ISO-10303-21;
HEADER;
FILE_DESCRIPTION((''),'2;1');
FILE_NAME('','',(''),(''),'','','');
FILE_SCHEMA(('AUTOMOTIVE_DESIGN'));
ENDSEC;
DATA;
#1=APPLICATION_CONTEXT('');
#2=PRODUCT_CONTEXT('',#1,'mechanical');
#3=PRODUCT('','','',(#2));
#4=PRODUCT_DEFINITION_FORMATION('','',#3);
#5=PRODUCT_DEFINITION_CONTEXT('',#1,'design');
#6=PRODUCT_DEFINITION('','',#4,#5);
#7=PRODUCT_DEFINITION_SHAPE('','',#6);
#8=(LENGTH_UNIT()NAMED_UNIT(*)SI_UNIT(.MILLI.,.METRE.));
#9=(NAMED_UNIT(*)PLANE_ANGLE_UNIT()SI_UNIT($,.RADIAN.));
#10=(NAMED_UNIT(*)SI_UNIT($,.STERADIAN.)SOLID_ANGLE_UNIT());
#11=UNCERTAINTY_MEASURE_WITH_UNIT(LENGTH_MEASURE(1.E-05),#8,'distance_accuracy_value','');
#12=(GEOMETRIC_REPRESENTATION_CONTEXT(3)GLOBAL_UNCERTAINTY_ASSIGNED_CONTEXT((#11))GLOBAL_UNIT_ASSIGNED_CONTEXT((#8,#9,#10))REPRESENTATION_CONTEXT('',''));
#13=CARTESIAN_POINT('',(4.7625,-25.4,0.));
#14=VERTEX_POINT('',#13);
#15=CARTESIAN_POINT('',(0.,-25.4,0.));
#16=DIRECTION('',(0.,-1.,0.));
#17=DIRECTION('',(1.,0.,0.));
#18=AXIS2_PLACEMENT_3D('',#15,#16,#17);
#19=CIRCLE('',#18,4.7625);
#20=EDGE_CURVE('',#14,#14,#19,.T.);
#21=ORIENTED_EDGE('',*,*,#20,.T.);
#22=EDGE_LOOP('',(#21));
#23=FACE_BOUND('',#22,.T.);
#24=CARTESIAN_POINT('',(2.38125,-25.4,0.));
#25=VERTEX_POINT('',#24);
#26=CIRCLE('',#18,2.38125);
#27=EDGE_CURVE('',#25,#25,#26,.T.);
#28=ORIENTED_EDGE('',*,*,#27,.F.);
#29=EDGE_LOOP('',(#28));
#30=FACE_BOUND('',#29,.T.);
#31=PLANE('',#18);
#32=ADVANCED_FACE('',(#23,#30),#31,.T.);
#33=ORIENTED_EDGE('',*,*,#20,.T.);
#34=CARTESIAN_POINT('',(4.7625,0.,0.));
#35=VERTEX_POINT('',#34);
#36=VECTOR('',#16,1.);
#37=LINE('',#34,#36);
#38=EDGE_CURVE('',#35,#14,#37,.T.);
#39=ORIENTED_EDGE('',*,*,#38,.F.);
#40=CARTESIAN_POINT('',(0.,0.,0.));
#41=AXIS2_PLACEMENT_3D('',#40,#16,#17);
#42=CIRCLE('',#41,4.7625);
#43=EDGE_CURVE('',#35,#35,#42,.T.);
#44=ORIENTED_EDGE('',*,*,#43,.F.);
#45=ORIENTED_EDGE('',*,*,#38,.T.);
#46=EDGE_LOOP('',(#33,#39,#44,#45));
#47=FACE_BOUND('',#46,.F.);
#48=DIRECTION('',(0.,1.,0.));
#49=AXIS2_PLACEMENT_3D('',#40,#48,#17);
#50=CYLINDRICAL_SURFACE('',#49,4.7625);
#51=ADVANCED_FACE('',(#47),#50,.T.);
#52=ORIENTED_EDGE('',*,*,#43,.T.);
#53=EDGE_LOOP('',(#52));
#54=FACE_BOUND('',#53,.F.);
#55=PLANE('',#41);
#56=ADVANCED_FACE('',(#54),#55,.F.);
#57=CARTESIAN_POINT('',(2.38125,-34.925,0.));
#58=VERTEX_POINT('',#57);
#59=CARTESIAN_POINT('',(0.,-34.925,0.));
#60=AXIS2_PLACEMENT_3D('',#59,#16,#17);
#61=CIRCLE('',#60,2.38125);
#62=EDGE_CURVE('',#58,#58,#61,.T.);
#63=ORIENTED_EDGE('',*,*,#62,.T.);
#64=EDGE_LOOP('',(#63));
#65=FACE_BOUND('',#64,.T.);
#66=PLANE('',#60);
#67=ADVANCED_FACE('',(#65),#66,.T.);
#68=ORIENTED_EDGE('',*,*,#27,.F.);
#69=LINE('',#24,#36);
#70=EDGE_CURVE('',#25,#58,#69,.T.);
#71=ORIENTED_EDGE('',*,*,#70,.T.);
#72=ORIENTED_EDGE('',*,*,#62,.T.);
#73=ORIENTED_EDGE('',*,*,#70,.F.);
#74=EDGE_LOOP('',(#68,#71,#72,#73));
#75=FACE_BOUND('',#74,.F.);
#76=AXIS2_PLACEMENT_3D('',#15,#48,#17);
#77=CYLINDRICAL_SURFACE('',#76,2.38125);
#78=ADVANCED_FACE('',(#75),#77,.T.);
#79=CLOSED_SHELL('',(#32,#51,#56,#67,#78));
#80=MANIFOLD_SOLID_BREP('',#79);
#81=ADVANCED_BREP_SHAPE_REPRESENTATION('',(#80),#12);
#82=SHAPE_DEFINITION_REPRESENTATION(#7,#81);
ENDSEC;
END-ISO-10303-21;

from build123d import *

# Parameters (mm, degrees)
F0_R     = 4.7625
F1_DEPTH = 25.4
F2_R     = 2.38125
F3_DEPTH = 9.525


# Not quite as in the source:
# - a length typed as a fraction of an inch, garbled in the dataset ("3 / 203.2 mm" for 3/8 in), is restored


with BuildPart() as f1:
    # F0 (on Front) → F1 (new body)
    with BuildSketch(Plane.XZ):
        Circle(F0_R)
    extrude(amount=F1_DEPTH)

    # F2 (on face) → F3 (join)
    with BuildSketch(Plane.XZ.offset(25.4)):
        Circle(F2_R)
    extrude(amount=F3_DEPTH)


solid = f1.part
